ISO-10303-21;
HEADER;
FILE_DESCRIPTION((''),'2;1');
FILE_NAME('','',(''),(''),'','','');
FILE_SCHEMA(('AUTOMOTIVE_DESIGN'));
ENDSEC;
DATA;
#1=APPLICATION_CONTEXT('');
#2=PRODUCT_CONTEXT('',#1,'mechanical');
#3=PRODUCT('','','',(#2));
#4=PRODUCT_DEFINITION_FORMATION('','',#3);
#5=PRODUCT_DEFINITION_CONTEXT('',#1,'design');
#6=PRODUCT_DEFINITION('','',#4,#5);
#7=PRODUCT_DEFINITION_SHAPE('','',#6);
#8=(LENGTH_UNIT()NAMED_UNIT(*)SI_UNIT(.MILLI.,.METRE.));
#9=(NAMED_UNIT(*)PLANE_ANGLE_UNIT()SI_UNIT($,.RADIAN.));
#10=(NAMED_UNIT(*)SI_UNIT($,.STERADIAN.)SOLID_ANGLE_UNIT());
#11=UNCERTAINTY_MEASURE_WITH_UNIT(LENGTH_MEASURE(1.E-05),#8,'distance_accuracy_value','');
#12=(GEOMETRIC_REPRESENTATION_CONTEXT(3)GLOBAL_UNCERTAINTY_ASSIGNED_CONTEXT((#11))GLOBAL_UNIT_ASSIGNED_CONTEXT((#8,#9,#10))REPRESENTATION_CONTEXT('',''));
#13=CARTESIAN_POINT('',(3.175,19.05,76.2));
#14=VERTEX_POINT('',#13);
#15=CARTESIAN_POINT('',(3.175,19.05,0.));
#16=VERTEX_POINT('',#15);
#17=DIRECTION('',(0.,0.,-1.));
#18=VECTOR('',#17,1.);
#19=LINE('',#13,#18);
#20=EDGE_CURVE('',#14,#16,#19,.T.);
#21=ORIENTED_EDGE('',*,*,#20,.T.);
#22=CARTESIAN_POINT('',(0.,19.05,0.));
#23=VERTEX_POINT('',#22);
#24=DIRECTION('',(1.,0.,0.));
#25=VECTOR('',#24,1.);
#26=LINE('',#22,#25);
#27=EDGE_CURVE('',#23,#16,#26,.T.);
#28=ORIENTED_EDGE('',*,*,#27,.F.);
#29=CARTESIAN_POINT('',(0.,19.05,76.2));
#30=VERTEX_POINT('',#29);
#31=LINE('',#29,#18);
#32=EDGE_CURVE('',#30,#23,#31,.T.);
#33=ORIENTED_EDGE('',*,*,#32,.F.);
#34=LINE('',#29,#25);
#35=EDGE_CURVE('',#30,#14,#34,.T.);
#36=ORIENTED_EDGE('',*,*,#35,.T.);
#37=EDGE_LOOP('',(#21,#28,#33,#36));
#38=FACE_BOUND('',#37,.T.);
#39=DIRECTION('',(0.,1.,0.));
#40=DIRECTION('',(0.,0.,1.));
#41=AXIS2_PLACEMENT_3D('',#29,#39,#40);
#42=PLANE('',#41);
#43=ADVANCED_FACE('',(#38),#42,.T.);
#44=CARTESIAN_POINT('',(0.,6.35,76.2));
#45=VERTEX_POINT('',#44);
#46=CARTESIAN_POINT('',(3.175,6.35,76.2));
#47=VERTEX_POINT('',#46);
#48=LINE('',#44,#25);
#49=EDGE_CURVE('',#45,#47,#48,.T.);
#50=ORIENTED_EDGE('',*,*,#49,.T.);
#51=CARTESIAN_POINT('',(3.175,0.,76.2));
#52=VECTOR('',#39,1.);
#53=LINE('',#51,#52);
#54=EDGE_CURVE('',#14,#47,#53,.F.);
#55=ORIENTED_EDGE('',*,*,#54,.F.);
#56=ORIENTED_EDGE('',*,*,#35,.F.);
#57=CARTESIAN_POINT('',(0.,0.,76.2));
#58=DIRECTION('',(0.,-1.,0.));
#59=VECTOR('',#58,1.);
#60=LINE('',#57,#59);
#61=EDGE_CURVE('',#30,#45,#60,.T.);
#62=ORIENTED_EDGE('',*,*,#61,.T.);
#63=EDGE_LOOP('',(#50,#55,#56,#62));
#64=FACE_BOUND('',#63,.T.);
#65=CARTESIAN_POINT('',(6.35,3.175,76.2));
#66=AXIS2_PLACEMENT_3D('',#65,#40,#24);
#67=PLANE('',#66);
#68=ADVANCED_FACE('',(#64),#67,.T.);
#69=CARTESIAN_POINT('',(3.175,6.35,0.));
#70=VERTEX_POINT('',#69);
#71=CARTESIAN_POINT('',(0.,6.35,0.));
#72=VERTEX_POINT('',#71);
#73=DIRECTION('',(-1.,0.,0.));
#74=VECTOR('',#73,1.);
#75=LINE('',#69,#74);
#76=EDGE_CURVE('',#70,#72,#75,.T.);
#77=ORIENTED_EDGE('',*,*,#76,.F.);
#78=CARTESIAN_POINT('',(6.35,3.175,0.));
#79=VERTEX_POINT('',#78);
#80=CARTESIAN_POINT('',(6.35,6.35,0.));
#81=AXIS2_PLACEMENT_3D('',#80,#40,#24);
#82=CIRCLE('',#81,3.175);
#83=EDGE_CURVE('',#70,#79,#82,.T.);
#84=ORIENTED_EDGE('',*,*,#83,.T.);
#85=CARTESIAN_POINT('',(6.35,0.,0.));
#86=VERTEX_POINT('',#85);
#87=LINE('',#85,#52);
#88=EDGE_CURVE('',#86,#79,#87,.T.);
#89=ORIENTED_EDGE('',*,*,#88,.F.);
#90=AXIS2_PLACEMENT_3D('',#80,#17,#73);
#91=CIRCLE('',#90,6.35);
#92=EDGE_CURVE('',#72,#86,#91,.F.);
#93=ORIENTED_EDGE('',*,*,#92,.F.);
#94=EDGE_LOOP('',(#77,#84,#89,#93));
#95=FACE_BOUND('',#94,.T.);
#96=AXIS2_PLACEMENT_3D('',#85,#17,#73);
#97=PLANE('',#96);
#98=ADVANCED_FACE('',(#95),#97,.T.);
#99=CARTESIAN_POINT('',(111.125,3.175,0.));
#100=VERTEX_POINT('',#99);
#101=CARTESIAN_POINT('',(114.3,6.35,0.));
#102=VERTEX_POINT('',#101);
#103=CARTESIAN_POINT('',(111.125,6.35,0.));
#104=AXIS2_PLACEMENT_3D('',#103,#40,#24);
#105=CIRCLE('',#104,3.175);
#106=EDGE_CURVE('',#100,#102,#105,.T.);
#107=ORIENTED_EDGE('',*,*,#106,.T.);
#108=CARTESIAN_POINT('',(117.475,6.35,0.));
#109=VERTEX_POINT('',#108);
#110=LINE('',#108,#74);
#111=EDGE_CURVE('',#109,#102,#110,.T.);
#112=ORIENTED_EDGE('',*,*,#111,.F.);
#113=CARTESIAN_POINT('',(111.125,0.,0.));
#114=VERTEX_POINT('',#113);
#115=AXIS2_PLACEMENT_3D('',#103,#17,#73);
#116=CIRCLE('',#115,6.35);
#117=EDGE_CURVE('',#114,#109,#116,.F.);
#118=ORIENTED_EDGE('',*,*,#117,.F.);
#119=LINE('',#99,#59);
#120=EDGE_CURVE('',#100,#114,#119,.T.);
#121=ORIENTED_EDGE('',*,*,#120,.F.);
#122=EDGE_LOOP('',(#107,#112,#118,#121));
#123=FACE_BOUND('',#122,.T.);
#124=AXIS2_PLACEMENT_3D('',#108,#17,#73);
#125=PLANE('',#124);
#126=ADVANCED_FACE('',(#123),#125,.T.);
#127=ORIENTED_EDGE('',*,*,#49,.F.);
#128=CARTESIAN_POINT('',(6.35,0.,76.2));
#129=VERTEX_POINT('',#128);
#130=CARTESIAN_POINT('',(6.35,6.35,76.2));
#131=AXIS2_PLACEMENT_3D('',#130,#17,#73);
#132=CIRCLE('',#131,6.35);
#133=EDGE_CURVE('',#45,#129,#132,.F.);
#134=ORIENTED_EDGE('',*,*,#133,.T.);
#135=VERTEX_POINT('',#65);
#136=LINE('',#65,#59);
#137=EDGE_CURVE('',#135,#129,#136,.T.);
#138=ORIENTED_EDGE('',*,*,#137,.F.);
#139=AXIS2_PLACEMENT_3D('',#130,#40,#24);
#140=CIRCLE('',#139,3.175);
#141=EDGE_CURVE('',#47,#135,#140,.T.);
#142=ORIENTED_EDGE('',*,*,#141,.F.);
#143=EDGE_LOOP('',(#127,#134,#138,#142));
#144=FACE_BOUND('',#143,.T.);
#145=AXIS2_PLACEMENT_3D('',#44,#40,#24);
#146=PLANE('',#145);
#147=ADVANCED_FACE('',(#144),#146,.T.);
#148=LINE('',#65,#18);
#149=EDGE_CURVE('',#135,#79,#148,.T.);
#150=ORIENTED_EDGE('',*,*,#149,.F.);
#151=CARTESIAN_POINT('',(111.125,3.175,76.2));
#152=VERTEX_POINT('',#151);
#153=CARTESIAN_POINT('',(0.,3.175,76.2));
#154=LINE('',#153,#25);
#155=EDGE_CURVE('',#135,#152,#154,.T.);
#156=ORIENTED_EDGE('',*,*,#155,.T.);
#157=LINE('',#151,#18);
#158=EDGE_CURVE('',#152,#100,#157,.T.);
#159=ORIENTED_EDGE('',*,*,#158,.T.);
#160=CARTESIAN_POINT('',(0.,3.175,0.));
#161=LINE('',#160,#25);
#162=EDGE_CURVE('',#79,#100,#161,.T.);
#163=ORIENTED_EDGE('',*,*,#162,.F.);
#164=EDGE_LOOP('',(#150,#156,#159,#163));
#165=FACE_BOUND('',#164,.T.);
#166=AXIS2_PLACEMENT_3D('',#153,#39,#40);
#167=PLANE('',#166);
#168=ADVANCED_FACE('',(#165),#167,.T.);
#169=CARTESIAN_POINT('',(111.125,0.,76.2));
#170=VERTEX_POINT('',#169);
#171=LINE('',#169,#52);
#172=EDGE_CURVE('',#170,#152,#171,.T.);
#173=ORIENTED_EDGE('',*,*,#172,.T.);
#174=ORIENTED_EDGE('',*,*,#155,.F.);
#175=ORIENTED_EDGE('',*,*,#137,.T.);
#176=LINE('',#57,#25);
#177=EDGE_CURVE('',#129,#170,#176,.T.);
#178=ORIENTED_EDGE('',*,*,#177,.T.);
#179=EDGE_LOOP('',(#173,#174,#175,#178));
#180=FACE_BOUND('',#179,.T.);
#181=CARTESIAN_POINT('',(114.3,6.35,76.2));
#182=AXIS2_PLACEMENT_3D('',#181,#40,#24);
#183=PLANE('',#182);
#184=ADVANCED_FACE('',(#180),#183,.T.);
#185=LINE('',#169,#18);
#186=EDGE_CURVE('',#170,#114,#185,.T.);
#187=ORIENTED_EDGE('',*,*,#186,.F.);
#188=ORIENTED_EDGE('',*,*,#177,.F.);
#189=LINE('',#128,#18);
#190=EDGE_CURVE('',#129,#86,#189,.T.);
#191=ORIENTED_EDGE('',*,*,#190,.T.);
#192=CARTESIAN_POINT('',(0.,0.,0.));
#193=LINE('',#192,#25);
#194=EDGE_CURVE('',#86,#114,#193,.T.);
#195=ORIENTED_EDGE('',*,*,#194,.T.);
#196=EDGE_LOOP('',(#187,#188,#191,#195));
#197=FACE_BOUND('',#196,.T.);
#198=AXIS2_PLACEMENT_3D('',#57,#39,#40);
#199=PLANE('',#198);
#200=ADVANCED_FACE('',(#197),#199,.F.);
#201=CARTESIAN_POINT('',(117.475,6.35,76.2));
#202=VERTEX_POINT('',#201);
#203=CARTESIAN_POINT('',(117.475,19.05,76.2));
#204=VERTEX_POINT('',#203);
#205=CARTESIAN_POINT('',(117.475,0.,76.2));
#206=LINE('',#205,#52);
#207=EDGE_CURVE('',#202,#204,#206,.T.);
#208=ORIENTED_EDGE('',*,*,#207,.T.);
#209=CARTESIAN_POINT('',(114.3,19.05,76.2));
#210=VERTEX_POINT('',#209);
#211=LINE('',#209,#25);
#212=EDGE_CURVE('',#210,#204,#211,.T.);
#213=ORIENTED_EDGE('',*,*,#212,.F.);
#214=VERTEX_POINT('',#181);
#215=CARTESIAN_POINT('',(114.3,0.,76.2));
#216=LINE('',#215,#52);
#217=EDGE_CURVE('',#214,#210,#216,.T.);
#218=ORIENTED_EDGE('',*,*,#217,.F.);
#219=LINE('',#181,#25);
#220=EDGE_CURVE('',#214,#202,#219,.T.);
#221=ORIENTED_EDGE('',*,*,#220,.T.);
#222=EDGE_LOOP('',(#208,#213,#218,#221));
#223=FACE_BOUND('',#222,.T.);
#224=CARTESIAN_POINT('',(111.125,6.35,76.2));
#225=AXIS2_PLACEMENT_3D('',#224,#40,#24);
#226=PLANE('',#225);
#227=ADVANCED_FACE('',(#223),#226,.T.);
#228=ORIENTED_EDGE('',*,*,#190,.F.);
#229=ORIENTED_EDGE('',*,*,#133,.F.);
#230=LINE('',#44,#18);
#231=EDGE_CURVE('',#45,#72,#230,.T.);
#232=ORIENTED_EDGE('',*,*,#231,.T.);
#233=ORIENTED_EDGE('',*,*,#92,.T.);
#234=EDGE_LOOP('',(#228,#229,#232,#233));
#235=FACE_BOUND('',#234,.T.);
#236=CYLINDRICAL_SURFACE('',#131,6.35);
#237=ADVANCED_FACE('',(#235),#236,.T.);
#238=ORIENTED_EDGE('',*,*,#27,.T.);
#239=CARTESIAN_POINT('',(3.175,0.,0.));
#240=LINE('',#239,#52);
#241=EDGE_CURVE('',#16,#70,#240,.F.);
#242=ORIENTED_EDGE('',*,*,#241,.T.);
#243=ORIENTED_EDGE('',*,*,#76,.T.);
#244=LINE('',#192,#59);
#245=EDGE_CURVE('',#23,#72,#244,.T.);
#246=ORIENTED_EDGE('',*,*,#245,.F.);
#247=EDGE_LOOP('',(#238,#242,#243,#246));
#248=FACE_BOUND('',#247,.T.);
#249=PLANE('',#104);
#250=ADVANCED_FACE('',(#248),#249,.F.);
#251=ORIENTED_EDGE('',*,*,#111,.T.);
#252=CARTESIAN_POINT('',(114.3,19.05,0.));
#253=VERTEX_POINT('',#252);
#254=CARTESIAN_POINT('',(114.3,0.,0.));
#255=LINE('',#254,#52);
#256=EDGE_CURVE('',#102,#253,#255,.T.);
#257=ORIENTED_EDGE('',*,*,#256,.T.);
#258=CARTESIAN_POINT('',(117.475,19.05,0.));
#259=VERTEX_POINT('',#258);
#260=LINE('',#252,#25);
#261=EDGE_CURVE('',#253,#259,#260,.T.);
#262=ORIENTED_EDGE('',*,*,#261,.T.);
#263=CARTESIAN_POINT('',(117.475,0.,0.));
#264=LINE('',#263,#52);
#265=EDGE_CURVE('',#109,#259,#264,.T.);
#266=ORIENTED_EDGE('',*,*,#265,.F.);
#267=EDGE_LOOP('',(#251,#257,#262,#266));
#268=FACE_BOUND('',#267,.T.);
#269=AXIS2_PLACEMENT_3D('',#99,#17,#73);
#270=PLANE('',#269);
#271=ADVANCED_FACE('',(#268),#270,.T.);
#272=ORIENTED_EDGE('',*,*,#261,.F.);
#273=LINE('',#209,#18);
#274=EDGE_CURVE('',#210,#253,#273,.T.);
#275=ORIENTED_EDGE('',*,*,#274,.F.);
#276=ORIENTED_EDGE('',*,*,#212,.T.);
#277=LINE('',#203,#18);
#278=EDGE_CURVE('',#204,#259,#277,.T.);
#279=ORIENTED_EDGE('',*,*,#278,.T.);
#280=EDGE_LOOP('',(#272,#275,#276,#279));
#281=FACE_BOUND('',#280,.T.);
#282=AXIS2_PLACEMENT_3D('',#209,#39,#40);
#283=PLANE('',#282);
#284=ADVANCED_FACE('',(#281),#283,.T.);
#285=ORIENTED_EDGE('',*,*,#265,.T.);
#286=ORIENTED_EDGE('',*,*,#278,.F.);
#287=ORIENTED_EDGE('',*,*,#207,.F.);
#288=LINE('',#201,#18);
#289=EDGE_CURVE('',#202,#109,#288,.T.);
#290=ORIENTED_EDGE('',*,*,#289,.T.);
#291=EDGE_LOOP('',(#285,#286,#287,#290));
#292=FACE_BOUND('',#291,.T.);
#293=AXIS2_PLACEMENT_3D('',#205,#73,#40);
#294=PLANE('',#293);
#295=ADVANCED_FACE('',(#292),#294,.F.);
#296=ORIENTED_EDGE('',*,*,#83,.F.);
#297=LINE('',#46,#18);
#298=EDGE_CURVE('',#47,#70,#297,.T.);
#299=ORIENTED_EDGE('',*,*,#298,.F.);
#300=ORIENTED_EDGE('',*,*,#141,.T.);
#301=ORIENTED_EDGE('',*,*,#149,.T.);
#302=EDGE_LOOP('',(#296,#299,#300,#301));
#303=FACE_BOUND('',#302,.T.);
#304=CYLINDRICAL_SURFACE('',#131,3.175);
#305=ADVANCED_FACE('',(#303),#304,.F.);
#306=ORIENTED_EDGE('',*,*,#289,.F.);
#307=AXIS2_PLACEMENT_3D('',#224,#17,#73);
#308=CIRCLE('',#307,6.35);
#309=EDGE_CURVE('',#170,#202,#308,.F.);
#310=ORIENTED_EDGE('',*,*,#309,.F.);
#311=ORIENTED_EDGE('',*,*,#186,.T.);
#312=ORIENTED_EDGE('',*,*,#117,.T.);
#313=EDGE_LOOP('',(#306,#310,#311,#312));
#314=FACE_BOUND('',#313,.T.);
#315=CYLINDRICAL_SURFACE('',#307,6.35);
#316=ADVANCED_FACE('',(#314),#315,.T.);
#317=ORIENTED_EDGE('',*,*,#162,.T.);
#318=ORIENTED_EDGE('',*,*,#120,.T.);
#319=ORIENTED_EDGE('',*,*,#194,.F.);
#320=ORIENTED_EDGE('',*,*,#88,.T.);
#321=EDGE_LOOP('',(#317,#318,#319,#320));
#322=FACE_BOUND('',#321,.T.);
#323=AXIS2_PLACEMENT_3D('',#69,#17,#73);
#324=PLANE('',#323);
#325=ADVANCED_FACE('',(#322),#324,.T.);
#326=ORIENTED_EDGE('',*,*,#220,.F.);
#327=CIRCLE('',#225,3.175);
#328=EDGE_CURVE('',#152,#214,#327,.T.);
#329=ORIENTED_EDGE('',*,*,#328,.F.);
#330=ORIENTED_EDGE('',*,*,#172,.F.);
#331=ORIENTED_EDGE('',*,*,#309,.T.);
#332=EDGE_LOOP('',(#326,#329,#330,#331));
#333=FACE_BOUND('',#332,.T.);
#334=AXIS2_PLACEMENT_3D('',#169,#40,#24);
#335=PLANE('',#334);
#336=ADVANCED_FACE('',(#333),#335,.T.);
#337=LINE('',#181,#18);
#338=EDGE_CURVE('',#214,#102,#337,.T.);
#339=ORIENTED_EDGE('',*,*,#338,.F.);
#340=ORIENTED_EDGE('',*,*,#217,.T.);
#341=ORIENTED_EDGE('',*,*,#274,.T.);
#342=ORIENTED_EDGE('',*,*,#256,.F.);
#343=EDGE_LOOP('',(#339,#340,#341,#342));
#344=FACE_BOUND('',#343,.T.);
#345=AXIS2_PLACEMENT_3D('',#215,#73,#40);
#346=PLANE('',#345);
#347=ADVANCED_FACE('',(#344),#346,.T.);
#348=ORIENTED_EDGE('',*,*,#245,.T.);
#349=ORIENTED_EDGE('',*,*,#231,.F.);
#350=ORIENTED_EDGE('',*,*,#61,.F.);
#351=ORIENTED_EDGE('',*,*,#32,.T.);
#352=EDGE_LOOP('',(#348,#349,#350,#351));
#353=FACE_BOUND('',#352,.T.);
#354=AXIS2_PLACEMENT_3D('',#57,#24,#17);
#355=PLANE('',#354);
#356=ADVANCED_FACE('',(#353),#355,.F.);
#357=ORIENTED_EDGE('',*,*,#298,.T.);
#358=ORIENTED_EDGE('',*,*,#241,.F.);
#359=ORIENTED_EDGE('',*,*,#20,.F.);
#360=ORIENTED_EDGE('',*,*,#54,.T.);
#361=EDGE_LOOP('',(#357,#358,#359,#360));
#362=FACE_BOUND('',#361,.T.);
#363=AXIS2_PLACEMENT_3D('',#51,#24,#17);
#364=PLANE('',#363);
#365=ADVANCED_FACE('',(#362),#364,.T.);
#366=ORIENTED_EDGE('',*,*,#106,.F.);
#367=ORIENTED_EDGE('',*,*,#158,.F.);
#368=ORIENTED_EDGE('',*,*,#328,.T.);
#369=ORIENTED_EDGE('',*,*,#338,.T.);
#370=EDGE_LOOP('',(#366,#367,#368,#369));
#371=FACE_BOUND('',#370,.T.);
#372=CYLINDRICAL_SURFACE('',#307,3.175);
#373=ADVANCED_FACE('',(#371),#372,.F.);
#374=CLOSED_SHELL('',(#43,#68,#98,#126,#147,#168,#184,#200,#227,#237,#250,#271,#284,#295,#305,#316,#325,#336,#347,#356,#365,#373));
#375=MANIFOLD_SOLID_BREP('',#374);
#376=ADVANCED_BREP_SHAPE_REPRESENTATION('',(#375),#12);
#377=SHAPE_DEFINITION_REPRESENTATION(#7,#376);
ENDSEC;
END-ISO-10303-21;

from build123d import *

# Parameters (mm, degrees)
BASE_FLANGE1_DEPTH = 76.2


# Sheet-metal steps are written as plain solids
with BuildPart() as part:
    # Sketch1 → Base-Flange1 (new body)
    with BuildSketch(Plane.XY):
        with BuildLine():
            Line((117.475, 19.05), (117.475, 6.35))
            ThreePointArc((117.475, 6.35), (115.615128061, 1.859871939), (111.125, 0))
            Line((111.125, 0), (6.35, 0))
            ThreePointArc((6.35, 0), (1.859871939, 1.859871939), (0, 6.35))
            Line((0, 6.35), (0, 19.05))
            Line((0, 19.05), (3.175, 19.05))
            Line((3.175, 19.05), (3.175, 6.35))
            ThreePointArc((3.175, 6.35), (4.10493597, 4.10493597), (6.35, 3.175))
            Line((6.35, 3.175), (111.125, 3.175))
            ThreePointArc((111.125, 3.175), (113.37006403, 4.10493597), (114.3, 6.35))
            Line((114.3, 6.35), (114.3, 19.05))
            Line((114.3, 19.05), (117.475, 19.05))
        make_face()
    extrude(amount=BASE_FLANGE1_DEPTH)


solid = part.part
